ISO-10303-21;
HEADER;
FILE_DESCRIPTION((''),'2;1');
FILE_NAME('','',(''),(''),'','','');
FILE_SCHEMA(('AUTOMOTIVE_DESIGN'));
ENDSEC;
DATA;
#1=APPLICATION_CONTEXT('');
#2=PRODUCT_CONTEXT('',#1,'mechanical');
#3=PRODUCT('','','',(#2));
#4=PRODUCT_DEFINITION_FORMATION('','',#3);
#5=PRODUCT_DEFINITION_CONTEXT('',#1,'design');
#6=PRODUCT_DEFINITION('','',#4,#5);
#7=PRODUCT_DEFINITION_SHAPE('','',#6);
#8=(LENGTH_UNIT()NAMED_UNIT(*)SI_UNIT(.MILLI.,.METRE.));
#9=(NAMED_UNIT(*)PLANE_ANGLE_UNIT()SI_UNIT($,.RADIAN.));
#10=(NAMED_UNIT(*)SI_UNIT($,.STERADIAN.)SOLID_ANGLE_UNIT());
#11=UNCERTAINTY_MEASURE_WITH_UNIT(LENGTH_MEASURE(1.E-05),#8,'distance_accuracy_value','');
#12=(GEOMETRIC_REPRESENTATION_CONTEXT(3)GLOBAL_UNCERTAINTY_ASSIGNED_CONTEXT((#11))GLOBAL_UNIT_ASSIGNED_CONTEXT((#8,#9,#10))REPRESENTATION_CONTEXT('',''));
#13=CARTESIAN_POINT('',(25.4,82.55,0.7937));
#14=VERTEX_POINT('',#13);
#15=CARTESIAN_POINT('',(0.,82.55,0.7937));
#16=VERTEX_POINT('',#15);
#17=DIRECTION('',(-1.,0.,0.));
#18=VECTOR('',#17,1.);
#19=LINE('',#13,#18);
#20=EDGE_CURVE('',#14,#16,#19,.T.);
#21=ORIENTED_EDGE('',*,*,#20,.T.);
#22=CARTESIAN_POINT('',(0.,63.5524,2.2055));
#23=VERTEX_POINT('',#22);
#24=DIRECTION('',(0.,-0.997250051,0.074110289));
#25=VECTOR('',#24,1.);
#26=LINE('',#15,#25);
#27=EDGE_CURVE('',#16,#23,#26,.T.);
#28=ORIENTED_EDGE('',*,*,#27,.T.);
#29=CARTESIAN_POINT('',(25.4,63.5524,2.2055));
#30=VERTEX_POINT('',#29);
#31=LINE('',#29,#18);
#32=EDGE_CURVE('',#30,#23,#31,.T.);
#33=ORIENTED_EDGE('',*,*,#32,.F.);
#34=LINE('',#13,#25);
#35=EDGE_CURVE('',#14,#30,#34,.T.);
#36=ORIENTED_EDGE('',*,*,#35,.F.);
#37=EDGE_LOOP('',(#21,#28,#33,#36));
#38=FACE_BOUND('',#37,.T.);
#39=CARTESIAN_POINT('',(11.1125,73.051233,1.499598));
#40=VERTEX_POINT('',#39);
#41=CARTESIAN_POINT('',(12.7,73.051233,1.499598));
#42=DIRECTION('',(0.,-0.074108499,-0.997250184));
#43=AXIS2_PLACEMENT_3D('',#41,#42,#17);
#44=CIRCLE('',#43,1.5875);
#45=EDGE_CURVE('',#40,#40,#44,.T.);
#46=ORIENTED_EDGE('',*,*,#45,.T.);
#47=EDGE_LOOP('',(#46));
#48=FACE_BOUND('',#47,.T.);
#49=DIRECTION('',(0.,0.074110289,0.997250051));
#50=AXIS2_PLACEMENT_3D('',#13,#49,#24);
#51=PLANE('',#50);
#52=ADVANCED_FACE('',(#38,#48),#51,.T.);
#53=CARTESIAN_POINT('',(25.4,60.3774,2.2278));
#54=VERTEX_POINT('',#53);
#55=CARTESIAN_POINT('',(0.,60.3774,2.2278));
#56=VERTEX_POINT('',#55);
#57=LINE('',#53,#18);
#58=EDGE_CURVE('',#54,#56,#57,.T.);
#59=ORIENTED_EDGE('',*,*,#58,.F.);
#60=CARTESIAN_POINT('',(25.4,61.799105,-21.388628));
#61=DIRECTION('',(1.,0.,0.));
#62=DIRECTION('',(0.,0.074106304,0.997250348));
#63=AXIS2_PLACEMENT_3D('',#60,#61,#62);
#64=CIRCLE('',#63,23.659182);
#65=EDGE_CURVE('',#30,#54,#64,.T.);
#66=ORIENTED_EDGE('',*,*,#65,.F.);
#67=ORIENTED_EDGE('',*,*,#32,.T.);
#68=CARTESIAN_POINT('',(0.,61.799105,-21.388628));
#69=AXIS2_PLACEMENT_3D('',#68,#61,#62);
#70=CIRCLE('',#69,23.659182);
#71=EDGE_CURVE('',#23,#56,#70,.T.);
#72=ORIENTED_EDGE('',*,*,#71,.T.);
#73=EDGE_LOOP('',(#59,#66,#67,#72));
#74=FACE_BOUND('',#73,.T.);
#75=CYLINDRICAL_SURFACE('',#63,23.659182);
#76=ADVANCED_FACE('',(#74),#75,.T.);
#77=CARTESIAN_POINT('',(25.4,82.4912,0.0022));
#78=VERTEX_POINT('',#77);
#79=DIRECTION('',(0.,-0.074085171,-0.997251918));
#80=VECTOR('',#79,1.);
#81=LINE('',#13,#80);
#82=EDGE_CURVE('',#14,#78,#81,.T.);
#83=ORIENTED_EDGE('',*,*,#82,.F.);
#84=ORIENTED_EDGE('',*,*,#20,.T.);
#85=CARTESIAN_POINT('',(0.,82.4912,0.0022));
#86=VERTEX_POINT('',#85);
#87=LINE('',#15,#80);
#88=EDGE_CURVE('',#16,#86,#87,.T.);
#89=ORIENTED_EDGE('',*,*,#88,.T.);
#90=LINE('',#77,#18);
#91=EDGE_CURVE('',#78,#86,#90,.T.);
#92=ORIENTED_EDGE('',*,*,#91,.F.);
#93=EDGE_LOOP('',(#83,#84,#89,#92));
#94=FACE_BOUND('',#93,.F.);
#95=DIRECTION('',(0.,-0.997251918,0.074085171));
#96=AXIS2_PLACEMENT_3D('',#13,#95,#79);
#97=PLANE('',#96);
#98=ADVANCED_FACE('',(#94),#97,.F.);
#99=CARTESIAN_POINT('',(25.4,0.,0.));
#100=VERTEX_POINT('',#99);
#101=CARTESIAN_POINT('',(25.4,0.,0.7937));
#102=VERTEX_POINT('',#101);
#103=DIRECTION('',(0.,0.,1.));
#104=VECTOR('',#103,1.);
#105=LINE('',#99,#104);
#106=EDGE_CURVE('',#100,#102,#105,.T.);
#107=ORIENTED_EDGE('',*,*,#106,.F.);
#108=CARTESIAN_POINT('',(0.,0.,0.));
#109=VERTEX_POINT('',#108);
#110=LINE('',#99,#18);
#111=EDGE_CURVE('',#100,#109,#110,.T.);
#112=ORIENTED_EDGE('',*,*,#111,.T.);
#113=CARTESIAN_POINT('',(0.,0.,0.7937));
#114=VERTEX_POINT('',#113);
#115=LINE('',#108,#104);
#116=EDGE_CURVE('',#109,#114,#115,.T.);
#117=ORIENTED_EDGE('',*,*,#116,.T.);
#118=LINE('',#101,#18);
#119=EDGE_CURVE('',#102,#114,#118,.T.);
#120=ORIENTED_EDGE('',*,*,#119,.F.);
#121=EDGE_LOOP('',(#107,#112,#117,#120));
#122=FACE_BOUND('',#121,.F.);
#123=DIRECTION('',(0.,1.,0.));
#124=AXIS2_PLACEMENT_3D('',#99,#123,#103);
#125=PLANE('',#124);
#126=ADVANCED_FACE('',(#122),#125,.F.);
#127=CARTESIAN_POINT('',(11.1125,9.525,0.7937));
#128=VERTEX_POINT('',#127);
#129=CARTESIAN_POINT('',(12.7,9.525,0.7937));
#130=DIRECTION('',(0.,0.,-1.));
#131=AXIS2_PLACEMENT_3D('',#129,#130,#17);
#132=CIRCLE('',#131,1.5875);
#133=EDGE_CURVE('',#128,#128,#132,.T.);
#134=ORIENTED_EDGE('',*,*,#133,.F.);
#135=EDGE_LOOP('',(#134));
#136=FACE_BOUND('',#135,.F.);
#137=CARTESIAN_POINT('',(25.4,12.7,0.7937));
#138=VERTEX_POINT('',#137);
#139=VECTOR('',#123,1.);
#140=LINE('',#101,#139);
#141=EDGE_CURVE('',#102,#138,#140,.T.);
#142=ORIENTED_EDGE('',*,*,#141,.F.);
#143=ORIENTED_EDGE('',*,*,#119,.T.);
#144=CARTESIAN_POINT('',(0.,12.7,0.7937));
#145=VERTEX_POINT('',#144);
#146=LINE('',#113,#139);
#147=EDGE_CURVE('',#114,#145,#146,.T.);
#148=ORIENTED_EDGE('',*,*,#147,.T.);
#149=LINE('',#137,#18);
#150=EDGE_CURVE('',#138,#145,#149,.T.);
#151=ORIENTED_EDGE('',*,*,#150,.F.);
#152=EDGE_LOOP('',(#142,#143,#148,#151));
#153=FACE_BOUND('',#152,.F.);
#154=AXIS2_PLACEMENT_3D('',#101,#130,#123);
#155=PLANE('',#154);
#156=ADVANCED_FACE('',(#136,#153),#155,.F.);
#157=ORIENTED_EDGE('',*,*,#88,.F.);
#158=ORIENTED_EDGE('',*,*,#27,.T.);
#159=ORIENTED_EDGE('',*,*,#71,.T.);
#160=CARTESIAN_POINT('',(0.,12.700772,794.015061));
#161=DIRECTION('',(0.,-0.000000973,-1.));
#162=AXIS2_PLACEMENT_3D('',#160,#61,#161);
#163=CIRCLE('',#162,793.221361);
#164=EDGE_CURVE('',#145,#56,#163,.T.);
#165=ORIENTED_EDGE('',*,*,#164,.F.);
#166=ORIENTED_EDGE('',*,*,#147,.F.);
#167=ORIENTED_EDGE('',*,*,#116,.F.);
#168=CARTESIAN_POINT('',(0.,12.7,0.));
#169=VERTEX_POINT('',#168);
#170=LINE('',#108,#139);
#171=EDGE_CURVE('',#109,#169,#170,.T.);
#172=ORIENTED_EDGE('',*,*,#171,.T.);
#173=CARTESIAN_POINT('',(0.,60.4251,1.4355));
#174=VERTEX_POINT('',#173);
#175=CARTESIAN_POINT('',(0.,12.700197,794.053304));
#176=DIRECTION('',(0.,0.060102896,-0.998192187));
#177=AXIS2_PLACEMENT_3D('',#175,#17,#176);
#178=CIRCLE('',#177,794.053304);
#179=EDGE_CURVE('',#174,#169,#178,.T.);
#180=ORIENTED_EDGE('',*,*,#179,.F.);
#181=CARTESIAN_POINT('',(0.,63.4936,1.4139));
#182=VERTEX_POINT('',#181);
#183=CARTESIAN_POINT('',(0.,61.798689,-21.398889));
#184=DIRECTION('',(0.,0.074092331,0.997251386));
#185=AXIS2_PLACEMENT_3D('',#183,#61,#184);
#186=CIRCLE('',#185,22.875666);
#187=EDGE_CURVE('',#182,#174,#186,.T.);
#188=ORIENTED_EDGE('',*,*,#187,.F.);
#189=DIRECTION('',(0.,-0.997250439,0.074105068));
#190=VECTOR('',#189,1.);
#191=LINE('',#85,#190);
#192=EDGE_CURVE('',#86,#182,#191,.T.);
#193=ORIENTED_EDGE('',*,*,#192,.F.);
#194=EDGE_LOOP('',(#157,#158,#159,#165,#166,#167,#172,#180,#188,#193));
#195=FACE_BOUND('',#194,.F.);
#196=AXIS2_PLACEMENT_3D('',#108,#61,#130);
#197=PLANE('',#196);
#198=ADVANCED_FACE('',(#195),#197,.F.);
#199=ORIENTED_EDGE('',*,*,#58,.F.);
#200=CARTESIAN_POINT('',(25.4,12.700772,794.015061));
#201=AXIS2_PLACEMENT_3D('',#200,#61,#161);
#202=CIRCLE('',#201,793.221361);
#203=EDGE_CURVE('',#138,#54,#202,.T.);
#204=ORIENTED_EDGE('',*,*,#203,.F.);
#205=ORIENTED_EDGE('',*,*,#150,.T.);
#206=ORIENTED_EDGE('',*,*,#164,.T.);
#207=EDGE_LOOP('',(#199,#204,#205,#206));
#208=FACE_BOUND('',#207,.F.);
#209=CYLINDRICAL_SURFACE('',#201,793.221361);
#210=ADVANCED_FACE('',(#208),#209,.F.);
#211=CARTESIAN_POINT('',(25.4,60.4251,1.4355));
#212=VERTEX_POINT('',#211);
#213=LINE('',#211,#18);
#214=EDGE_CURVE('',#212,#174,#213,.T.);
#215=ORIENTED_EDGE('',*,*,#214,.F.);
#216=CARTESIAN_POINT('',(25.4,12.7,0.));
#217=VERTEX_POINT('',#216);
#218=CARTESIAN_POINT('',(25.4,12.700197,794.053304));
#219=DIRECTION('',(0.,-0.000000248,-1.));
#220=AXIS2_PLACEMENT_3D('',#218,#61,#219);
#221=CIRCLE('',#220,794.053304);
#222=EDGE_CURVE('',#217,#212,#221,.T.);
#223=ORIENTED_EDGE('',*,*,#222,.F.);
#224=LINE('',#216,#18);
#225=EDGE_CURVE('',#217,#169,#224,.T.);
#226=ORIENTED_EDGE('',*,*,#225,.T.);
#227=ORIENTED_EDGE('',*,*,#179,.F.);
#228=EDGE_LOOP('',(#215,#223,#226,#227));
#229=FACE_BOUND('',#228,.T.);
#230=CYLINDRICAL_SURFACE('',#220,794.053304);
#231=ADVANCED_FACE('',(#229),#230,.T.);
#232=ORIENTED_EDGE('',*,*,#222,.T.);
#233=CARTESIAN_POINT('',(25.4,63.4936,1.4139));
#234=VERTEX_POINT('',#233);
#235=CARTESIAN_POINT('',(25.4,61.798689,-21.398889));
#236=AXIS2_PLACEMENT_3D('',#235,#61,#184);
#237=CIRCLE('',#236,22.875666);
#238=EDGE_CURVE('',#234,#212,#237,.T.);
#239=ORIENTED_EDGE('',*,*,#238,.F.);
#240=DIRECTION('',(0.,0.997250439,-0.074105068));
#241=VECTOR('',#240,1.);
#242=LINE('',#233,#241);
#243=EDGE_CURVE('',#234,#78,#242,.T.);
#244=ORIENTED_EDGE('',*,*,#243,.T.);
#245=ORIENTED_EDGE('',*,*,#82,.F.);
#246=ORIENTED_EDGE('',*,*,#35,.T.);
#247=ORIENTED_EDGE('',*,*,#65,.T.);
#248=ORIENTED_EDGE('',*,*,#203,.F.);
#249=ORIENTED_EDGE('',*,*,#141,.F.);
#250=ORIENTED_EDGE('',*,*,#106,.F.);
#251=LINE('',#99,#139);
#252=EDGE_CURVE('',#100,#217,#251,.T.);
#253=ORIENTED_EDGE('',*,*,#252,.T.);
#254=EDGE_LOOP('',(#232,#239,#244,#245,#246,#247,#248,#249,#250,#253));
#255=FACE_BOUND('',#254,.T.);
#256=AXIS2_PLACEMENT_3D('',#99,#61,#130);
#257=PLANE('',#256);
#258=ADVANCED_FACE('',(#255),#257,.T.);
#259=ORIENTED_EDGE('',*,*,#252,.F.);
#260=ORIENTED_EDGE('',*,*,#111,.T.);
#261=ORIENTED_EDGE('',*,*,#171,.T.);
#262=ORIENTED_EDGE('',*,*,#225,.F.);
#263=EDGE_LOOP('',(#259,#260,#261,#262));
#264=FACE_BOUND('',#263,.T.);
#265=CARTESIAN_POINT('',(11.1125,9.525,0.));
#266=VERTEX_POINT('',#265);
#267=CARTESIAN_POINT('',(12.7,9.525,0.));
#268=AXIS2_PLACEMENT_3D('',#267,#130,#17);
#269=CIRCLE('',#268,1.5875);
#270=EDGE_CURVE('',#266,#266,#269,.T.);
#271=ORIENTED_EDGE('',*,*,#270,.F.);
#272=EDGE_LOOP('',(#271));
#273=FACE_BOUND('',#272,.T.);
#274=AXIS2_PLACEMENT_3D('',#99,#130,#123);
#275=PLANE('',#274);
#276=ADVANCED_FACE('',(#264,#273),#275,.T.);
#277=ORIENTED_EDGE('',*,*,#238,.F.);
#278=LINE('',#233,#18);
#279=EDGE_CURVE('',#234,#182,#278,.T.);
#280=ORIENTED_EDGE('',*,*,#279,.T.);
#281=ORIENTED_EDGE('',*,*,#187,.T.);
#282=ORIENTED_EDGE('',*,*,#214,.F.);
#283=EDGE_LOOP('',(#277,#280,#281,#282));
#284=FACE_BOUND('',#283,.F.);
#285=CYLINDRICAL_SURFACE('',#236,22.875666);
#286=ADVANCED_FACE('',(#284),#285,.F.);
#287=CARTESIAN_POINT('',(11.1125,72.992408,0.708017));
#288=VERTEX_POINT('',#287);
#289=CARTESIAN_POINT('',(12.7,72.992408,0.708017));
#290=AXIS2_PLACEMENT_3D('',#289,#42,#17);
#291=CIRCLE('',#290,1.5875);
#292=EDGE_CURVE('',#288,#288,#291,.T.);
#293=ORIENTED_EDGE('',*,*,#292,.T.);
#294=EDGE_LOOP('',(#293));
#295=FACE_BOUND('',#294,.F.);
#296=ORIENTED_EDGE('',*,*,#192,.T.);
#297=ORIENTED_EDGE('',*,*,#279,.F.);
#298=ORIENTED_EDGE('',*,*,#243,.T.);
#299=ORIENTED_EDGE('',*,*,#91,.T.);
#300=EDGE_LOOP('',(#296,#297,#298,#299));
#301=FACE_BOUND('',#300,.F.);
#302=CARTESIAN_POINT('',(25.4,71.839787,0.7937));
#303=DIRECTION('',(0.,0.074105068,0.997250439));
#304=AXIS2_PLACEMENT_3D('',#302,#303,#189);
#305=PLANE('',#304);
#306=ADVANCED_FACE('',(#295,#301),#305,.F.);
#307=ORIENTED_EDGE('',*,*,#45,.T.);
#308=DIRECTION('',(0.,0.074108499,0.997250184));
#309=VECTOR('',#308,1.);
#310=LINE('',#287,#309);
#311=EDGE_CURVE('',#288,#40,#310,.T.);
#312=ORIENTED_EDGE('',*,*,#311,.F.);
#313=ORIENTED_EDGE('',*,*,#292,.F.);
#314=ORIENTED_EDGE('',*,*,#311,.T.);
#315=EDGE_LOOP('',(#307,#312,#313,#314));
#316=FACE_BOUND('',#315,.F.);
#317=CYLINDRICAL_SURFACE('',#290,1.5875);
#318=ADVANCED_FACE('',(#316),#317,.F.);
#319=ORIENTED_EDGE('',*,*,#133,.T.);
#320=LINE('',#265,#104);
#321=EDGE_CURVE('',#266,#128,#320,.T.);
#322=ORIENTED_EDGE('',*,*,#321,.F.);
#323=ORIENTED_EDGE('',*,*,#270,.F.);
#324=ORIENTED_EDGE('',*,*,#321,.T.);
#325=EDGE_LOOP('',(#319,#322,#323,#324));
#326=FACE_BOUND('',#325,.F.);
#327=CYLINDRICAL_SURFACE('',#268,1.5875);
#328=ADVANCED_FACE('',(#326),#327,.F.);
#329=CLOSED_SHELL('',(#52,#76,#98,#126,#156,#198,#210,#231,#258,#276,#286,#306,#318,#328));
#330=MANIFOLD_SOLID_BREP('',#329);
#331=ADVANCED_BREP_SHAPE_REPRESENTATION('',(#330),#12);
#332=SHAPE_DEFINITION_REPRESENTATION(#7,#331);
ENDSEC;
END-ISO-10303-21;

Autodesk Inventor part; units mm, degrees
ref_plane "YZ Plane" through (0, 0, 0) normal (1, 0, 0) x (0, 1, 0)
ref_plane "XZ Plane" through (0, 0, 0) normal (0, 1, 0) x (-1, 0, 0)
sketch "Sketch1" plane through (0, 0, 0) normal (0, 0, 1) x (1, 0, 0)
  line L0 (0, 0) -> (25.4, 0)
  line L1 (25.4, 0) -> (25.4, 82.55)
  line L2 (25.4, 82.55) -> (0, 82.55)
  line L3 (0, 82.55) -> (0, 0)
  line L4 (12.7, 82.55) -> (12.7, 0) construction
  circle A0 centre (12.7, 73.025) radius 1.5875
  circle A1 centre (12.7, 9.525) radius 1.5875
  dimension "d0" = 25.4
  dimension "d1" = 82.55
  dimension "d2" = 3.175
  dimension "d3" = 9.525
  dimension "d4" = 9.525
extrude "Extrusion1" add sketch "Sketch1" along normal blind 0.7937
ref_plane "Work Plane1" through (12.7, 0, 0) normal (1, 0, 0) x (0, 0, -1)
sketch "Sketch2" plane through (25.4, 0, 0) normal (1, 0, 0) x (0, 0, -1)
  line L0 (0, 0) -> (0, 82.55) projected
  line L1 (0, 82.55) -> (-0.7937, 82.55) projected
  line L2 (-0.7937, 0) -> (-0.7937, 82.55) projected
  line L3 (0, 0) -> (-0.7937, 0) projected
  line L4 (1.093, 107.9388) -> (-6.4365, 6.6182) construction
  line L5 (1.093, 107.9388) -> (127.7437, 98.527) construction
  line L6 (-0.7937, 82.55) -> (-2.2055, 63.5524)
  arc A0 (-2.2055, 63.5524) -> (-2.2278, 60.3774) centre (21.3863, 61.7992) ccw
  line L7 (-0.7937, 0) -> (-0.7937, 12.7)
  arc A1 (-0.7937, 12.7) -> (-2.2278, 60.3774) centre (-794.0664, 12.7) ccw
  line L8 (-0.7937, 82.55) -> (-0.0022, 82.4912)
  line L9 (-0.0022, 82.4912) -> (-1.4139, 63.4936)
  line L10 (-0.7937, 12.7) -> (0, 12.7) construction
  line L11 (-0.7937, 0) -> (0, 0)
  line L12 (0, 12.7) -> (0, 0)
  arc A2 (0, 12.7) -> (-1.4355, 60.4251) centre (-794.0664, 12.7) ccw
  arc A3 (-1.4139, 63.4936) -> (-1.4355, 60.4251) centre (21.3863, 61.7992) ccw
  dimension "d7" = 85.75
  dimension "d8" = 19.05
  dimension "d9" = 12.7
  dimension "d12" = 0.7937
  dimension "d15" = 101.6
  dimension "d16" = 127
  dimension "d17" = 25.4
  dimension "d30" = 3.175
extrude "Extrusion2" cut sketch "Sketch2" against normal blind 25.4 contours L3 L2 A2 L0 | A2 L2 L9 L8 L1 L0 | L8 L9 L2
extrude "Extrusion3" add sketch "Sketch2" against normal blind 25.4 contours L3 L2 A2 L0 | L2 A1 A0 L6 L9 A3 A2 | L8 L9 L2
sketch "Sketch3" plane through (25.4, 63.4936, 1.4139) normal (0, -0.0741085, -0.9972502) x (-1, 0, 0)
  line L0 (0, 0) -> (25.4, 0) projected
  line L1 (0, 19.05) -> (25.4, 19.05) projected
  line L2 (12.7, 19.05) -> (12.7, 0) construction
  circle A0 centre (12.7, 9.525) radius 1.5875
  point P0 (25.4, -63.2142)
  dimension "d22" = 3.175
  dimension "d23" = 9.525
extrude "Extrusion4" cut sketch "Sketch3" against normal through all
sketch "Sketch4" plane through (25.4, 0, 0) normal (0, 0, -1) x (-1, 0, 0)
  line L0 (0, 0) -> (25.4, 0) projected
  line L1 (0, 12.7) -> (25.4, 12.7) projected
  line L2 (12.7, 12.7) -> (12.7, 0) construction
  circle A0 centre (12.7, 9.525) radius 1.5875
  dimension "d26" = 3.175
  dimension "d27" = 9.525
extrude "Extrusion5" cut sketch "Sketch4" against normal through all
equation "\"d4\" = d3"
equation "\"d12\" = d11"
equation "\"d11\" = 0.79375"
properties part number "Hopper to Pail Polycarbonate Flap Connector V2" material "Polycarbonate, Clear"
